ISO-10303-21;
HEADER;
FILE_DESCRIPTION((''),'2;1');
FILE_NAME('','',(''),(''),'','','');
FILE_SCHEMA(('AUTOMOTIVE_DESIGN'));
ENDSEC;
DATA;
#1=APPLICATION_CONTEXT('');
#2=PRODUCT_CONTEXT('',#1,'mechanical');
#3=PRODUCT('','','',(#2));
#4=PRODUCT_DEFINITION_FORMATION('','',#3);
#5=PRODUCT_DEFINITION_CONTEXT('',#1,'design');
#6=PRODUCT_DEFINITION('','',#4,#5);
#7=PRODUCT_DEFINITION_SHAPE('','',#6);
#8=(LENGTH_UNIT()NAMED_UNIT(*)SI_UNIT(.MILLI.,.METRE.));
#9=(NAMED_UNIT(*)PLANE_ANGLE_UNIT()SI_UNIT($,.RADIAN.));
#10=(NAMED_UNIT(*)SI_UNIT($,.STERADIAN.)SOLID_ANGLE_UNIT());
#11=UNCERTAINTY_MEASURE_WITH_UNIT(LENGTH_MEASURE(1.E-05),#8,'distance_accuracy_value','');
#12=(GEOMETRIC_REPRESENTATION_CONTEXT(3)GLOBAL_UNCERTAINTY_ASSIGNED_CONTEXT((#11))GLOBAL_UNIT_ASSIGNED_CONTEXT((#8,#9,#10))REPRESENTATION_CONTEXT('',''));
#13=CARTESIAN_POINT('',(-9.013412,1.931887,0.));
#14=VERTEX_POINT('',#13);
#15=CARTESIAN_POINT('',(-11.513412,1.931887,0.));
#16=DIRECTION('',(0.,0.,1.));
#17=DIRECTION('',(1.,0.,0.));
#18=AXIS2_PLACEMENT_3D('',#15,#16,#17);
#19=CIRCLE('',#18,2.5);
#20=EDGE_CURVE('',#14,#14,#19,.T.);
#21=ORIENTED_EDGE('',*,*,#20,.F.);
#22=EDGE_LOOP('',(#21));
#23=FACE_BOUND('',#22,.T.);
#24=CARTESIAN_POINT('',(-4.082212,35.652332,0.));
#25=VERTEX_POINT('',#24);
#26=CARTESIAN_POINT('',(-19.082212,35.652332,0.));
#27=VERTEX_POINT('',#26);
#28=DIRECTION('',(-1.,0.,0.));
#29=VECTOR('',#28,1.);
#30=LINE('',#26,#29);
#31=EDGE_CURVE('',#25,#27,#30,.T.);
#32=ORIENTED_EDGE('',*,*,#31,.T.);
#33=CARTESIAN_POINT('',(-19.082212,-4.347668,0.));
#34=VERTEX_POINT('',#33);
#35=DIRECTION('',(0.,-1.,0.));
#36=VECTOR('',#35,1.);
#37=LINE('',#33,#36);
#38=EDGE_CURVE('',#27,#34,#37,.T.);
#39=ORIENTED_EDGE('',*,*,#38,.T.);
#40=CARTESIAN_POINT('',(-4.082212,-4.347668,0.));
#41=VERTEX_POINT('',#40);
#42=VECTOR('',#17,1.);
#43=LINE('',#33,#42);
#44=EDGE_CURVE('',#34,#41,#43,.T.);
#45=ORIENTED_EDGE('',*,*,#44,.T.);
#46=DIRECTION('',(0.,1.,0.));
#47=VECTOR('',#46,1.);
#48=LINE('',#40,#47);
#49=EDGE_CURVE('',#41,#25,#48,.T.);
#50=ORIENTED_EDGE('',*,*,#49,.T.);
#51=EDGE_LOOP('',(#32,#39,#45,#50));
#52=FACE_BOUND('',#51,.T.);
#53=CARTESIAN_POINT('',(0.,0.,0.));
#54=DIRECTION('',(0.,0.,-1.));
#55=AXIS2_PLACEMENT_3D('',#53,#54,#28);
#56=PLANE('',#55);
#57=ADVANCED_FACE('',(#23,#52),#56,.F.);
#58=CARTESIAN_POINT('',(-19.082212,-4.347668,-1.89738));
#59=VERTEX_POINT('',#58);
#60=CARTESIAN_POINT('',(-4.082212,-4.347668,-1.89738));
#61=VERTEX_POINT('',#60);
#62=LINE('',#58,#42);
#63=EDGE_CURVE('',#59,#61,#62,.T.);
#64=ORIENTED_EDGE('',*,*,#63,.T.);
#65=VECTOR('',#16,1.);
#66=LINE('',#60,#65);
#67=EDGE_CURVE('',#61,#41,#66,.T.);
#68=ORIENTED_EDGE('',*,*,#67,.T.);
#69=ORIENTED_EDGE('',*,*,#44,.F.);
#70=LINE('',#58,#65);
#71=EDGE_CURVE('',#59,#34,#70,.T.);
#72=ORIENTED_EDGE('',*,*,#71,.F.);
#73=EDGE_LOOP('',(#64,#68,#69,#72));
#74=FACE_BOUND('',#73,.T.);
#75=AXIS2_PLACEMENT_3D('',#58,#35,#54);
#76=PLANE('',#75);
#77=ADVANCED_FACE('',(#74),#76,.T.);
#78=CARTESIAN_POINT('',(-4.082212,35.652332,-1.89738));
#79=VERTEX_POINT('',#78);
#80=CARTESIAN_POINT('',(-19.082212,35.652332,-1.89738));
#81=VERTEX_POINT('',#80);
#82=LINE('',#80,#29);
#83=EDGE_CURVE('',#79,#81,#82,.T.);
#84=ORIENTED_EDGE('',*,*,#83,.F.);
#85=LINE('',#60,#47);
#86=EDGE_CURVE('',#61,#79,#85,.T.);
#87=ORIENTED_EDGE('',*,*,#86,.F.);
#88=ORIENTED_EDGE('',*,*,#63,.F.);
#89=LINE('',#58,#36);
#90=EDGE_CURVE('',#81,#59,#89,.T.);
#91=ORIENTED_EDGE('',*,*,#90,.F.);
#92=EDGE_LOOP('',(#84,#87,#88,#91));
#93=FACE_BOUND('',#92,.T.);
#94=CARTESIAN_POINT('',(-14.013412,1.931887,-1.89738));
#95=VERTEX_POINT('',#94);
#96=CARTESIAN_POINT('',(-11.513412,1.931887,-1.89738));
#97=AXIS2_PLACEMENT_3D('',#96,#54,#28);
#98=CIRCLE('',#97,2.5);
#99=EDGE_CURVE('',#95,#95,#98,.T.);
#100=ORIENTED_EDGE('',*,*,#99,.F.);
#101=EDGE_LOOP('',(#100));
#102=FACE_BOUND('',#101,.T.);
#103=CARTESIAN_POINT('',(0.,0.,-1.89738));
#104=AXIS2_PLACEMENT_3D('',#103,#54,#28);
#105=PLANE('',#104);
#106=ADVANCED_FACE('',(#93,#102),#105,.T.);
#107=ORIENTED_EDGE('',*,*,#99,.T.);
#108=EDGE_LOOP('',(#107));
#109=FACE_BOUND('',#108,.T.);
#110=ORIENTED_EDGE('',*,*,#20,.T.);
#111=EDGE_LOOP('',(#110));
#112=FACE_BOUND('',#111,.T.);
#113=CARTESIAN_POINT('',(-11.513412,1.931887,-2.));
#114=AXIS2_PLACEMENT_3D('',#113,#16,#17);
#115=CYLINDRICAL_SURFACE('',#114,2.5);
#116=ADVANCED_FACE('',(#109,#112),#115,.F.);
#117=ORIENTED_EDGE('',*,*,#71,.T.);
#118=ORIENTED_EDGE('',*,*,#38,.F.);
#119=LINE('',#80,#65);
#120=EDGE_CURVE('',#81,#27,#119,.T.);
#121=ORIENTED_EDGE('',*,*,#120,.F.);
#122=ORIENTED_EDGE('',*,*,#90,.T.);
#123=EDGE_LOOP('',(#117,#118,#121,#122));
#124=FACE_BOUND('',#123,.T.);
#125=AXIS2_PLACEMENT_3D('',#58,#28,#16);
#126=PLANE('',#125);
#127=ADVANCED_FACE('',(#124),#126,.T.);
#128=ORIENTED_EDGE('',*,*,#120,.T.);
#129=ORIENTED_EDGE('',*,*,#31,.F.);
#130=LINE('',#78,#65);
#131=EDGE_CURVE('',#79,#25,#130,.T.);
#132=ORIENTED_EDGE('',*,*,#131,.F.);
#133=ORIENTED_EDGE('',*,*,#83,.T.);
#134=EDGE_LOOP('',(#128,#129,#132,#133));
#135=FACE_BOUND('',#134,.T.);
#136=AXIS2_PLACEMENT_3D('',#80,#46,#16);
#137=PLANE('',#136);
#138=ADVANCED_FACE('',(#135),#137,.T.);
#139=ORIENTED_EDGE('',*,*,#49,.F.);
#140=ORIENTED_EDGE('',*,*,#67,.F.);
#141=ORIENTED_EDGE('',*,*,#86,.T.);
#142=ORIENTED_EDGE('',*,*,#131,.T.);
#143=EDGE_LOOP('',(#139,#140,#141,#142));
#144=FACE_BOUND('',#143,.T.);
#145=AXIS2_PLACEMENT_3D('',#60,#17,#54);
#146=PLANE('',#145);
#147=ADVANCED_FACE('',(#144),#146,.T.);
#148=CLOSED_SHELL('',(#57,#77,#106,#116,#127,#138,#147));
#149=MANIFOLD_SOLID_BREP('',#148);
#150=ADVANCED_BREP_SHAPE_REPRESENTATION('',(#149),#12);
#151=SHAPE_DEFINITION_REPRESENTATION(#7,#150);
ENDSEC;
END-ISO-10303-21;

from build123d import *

# Parameters (mm, degrees)
SKETCH1_W          = 15
SKETCH1_H          = 40
BASE_FLANGE1_DEPTH = 1.89738
SKETCH6_R          = 2.5
CUT_EXTRUDE1_DEPTH = 2


# Sheet-metal steps are written as plain solids
with BuildPart() as part:
    # Sketch1 → Base-Flange1 (new body)
    with BuildSketch(Plane.XY):
        with Locations((-11.582212431, 15.652332336)):
            Rectangle(SKETCH1_W, SKETCH1_H)
    extrude(amount=-BASE_FLANGE1_DEPTH)

    # Sketch6 → Cut-Extrude1 (cut)
    with BuildSketch(Plane.XY):
        with Locations((-11.513412006, 1.931886986)):
            Circle(SKETCH6_R)
    extrude(amount=-CUT_EXTRUDE1_DEPTH, mode=Mode.SUBTRACT)


solid = part.part
